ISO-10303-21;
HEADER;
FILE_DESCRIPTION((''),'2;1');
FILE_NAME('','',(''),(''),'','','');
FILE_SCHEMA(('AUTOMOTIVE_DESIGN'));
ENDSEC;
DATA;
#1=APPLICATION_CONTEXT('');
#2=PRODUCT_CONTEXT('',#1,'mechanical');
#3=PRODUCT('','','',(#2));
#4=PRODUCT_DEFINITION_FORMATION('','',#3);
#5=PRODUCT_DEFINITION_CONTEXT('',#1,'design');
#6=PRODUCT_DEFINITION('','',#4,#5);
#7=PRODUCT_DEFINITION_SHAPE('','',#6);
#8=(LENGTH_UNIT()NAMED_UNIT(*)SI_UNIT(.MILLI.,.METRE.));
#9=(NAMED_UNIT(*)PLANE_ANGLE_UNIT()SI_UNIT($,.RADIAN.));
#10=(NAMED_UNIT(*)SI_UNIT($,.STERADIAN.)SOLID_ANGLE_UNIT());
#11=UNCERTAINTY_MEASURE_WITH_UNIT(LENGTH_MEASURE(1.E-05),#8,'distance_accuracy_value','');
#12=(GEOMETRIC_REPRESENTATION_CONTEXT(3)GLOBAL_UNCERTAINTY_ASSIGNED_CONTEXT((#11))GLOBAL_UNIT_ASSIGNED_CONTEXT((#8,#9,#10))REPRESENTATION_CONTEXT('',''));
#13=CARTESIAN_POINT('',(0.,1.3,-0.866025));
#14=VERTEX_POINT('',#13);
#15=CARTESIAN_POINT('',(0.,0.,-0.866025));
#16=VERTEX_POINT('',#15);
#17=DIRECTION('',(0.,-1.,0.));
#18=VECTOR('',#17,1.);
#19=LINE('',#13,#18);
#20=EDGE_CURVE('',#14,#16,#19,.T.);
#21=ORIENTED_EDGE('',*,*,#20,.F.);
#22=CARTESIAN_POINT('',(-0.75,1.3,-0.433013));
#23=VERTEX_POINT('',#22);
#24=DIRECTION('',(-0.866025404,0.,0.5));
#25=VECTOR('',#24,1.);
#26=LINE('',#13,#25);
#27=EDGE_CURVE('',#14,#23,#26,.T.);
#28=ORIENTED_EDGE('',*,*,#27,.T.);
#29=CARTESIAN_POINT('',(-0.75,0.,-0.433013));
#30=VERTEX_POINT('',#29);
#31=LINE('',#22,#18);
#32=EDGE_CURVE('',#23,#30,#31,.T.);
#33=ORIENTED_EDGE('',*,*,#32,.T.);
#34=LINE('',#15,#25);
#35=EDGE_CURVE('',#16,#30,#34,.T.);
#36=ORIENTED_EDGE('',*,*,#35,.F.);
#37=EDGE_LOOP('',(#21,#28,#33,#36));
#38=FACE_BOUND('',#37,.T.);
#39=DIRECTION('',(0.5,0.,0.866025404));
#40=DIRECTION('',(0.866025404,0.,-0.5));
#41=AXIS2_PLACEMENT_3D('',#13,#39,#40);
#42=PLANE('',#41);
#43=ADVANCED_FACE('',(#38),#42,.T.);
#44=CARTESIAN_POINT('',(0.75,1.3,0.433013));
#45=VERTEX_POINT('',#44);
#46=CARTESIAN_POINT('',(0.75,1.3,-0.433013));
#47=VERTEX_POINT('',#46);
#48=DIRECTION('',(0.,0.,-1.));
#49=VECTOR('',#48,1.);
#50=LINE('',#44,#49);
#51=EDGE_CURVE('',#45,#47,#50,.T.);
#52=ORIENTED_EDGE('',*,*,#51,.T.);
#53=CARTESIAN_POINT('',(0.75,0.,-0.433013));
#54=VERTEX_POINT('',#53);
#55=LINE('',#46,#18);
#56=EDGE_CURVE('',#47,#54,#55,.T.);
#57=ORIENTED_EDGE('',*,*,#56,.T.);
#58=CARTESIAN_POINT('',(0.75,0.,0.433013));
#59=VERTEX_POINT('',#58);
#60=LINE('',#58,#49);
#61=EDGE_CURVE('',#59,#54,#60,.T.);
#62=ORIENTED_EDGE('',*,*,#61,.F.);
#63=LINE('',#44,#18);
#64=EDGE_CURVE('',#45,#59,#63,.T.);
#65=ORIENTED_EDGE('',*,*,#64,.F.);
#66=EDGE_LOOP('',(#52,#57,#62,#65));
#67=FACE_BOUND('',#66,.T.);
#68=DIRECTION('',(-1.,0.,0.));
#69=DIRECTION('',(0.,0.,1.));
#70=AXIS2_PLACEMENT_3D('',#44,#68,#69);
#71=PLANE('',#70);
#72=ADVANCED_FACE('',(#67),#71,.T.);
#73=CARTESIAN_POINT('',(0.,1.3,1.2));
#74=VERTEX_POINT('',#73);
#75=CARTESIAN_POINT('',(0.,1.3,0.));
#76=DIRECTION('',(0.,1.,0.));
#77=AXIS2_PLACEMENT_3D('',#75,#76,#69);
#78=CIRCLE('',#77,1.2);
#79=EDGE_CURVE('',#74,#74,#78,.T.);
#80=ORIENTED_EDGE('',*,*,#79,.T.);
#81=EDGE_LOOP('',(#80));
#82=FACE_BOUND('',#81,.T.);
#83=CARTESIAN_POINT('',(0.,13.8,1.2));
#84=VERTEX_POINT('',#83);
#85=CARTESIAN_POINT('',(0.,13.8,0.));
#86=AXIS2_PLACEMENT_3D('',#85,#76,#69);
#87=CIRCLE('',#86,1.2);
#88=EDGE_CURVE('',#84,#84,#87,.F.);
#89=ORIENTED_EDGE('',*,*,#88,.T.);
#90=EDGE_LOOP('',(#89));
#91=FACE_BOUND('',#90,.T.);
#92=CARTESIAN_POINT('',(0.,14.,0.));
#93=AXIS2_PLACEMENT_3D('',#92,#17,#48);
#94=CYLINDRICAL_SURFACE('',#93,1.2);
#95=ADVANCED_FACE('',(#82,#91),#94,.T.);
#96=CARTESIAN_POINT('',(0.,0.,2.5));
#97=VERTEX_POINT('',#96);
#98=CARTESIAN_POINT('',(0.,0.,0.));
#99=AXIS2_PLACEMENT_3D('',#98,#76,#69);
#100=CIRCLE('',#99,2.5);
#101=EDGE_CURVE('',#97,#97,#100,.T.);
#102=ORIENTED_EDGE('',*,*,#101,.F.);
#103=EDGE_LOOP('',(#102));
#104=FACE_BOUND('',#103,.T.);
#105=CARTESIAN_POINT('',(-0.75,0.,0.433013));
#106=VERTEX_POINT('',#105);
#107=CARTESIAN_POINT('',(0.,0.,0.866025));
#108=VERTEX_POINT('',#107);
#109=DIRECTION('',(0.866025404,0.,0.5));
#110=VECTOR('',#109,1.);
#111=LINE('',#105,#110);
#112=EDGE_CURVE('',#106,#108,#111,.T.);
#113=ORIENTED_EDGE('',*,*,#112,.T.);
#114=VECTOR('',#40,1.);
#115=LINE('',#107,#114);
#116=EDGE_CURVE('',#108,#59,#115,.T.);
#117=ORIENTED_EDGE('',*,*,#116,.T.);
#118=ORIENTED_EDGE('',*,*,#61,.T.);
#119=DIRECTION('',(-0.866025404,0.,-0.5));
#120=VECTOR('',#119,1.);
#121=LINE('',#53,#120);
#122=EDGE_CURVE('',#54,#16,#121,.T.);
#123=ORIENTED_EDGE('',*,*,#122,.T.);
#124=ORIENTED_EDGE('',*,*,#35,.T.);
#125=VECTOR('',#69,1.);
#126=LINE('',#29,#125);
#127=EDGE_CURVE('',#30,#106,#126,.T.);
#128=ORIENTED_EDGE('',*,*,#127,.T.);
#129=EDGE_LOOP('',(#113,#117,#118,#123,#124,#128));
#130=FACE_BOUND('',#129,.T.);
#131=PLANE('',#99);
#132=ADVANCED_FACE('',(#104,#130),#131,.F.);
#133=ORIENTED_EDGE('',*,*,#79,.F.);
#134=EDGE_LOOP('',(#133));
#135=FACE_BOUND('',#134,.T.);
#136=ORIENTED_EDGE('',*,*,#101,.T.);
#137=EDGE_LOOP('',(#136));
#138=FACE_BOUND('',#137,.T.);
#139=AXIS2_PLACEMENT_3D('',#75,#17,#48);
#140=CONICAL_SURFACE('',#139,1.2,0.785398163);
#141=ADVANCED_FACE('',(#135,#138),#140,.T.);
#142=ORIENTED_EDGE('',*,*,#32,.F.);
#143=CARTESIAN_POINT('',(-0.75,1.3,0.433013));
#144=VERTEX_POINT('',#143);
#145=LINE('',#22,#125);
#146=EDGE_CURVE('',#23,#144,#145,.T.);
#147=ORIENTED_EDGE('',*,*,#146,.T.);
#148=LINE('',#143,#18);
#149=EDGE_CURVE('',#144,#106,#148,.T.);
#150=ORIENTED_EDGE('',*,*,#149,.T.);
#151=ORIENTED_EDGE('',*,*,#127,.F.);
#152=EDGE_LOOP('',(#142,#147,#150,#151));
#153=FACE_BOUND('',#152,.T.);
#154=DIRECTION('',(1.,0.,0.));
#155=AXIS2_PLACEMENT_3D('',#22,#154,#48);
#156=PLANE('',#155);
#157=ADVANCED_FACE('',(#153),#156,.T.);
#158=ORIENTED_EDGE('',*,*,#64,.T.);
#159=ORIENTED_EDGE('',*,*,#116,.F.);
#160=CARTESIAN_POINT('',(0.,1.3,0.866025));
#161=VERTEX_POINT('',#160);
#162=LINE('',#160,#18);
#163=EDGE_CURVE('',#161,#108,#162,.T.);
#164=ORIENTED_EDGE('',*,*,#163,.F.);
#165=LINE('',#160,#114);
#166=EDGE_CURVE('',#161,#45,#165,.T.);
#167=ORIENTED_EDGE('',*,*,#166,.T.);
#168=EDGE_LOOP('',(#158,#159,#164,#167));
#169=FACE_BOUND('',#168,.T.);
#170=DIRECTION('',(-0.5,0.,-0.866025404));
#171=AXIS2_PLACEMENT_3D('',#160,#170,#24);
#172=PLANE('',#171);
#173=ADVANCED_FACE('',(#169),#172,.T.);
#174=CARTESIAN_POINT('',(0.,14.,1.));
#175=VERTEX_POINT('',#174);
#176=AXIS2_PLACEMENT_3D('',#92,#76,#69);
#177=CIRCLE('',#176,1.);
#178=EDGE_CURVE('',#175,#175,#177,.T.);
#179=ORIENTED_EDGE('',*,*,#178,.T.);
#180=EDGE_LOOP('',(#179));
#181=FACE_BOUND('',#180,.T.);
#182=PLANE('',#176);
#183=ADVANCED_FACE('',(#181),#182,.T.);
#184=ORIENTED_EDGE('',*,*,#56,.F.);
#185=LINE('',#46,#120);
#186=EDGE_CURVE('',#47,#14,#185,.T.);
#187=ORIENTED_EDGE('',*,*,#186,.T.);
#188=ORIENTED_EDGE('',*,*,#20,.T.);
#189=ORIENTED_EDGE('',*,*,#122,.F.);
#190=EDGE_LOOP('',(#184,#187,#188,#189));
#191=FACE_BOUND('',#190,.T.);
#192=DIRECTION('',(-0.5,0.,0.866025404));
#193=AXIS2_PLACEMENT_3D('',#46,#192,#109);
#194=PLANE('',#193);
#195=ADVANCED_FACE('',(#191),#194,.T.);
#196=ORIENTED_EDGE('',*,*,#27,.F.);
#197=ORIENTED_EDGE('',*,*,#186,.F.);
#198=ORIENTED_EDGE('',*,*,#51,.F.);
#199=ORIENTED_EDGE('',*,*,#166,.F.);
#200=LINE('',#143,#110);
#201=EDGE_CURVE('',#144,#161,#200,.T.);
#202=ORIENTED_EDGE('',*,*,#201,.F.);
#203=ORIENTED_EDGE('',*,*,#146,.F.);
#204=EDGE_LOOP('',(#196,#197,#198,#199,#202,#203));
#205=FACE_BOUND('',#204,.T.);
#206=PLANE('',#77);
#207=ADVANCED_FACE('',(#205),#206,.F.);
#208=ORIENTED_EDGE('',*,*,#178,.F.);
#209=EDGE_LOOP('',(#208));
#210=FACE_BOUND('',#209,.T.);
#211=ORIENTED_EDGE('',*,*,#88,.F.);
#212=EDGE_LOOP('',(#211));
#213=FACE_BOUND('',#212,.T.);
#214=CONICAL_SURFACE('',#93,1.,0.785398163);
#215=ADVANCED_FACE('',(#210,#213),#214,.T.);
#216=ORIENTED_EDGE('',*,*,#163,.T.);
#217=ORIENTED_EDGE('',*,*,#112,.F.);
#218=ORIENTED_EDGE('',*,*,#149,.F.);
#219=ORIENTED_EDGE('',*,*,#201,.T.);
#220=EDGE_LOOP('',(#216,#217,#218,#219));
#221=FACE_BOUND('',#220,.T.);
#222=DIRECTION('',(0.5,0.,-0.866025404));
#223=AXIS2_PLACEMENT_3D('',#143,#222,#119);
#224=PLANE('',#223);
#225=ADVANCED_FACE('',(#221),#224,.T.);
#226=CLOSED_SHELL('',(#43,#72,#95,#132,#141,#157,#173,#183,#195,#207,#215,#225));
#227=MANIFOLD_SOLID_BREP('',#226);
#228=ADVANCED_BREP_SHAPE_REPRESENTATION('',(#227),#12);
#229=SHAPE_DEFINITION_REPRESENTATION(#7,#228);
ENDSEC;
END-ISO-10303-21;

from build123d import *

# Parameters (mm, degrees)
SKETCH_1_R      = 2.5
EXTRUDE_1_DEPTH = 1.3
CHAMFER_1_SIZE  = 1.3
SKETCH_2_R      = 1.2
EXTRUDE_2_DEPTH = 12.7
CHAMFER_2_SIZE  = 0.2


with BuildPart() as part:
    # 草图1 → 凸台-拉伸1 (new body)
    with BuildSketch(Plane(origin=(0, 0, 0), x_dir=(1, 0, 0), z_dir=(0, 1, 0))):
        with Locations(Location((0, 0, 0), (0, 0, 270))):
            Circle(SKETCH_1_R)
        Polygon((0, -0.866025404), (0.75, -0.433012702), (0.75, 0.433012702), (0, 0.866025404), (-0.75, 0.433012702), (-0.75, -0.433012702), align=None, mode=Mode.SUBTRACT)
    extrude(amount=EXTRUDE_1_DEPTH)

    # 倒角1
    # the kernel refuses this chamfer: 1.3 mm, written as the material it takes off along each edge
    with BuildSketch(Plane(origin=(0, 1.3, 0), x_dir=(0, 0, 1), z_dir=(-1, 0, 0))) as chamfer_1_piece_1:
        Polygon((2.5, -CHAMFER_1_SIZE), (2.5 - CHAMFER_1_SIZE, 0), (2.5, 0), align=None)
    revolve(axis=Axis((0, 1.3, 0), (0, 1, 0)), mode=Mode.SUBTRACT)

    # 草图2 → 凸台-拉伸2 (add)
    with BuildSketch(Plane(origin=(0, 1.3, 0), x_dir=(1, 0, 0), z_dir=(0, 1, 0))):
        with Locations(Location((0, 0, 0), (0, 0, 270))):
            Circle(SKETCH_2_R)
    extrude(amount=EXTRUDE_2_DEPTH)

    # 倒角2
    chamfer_2_edges = [part.edges().sort_by_distance(p)[0] for p in [
        (0, 14, -1.2),
    ]]
    chamfer(chamfer_2_edges, length=CHAMFER_2_SIZE)


solid = part.part
